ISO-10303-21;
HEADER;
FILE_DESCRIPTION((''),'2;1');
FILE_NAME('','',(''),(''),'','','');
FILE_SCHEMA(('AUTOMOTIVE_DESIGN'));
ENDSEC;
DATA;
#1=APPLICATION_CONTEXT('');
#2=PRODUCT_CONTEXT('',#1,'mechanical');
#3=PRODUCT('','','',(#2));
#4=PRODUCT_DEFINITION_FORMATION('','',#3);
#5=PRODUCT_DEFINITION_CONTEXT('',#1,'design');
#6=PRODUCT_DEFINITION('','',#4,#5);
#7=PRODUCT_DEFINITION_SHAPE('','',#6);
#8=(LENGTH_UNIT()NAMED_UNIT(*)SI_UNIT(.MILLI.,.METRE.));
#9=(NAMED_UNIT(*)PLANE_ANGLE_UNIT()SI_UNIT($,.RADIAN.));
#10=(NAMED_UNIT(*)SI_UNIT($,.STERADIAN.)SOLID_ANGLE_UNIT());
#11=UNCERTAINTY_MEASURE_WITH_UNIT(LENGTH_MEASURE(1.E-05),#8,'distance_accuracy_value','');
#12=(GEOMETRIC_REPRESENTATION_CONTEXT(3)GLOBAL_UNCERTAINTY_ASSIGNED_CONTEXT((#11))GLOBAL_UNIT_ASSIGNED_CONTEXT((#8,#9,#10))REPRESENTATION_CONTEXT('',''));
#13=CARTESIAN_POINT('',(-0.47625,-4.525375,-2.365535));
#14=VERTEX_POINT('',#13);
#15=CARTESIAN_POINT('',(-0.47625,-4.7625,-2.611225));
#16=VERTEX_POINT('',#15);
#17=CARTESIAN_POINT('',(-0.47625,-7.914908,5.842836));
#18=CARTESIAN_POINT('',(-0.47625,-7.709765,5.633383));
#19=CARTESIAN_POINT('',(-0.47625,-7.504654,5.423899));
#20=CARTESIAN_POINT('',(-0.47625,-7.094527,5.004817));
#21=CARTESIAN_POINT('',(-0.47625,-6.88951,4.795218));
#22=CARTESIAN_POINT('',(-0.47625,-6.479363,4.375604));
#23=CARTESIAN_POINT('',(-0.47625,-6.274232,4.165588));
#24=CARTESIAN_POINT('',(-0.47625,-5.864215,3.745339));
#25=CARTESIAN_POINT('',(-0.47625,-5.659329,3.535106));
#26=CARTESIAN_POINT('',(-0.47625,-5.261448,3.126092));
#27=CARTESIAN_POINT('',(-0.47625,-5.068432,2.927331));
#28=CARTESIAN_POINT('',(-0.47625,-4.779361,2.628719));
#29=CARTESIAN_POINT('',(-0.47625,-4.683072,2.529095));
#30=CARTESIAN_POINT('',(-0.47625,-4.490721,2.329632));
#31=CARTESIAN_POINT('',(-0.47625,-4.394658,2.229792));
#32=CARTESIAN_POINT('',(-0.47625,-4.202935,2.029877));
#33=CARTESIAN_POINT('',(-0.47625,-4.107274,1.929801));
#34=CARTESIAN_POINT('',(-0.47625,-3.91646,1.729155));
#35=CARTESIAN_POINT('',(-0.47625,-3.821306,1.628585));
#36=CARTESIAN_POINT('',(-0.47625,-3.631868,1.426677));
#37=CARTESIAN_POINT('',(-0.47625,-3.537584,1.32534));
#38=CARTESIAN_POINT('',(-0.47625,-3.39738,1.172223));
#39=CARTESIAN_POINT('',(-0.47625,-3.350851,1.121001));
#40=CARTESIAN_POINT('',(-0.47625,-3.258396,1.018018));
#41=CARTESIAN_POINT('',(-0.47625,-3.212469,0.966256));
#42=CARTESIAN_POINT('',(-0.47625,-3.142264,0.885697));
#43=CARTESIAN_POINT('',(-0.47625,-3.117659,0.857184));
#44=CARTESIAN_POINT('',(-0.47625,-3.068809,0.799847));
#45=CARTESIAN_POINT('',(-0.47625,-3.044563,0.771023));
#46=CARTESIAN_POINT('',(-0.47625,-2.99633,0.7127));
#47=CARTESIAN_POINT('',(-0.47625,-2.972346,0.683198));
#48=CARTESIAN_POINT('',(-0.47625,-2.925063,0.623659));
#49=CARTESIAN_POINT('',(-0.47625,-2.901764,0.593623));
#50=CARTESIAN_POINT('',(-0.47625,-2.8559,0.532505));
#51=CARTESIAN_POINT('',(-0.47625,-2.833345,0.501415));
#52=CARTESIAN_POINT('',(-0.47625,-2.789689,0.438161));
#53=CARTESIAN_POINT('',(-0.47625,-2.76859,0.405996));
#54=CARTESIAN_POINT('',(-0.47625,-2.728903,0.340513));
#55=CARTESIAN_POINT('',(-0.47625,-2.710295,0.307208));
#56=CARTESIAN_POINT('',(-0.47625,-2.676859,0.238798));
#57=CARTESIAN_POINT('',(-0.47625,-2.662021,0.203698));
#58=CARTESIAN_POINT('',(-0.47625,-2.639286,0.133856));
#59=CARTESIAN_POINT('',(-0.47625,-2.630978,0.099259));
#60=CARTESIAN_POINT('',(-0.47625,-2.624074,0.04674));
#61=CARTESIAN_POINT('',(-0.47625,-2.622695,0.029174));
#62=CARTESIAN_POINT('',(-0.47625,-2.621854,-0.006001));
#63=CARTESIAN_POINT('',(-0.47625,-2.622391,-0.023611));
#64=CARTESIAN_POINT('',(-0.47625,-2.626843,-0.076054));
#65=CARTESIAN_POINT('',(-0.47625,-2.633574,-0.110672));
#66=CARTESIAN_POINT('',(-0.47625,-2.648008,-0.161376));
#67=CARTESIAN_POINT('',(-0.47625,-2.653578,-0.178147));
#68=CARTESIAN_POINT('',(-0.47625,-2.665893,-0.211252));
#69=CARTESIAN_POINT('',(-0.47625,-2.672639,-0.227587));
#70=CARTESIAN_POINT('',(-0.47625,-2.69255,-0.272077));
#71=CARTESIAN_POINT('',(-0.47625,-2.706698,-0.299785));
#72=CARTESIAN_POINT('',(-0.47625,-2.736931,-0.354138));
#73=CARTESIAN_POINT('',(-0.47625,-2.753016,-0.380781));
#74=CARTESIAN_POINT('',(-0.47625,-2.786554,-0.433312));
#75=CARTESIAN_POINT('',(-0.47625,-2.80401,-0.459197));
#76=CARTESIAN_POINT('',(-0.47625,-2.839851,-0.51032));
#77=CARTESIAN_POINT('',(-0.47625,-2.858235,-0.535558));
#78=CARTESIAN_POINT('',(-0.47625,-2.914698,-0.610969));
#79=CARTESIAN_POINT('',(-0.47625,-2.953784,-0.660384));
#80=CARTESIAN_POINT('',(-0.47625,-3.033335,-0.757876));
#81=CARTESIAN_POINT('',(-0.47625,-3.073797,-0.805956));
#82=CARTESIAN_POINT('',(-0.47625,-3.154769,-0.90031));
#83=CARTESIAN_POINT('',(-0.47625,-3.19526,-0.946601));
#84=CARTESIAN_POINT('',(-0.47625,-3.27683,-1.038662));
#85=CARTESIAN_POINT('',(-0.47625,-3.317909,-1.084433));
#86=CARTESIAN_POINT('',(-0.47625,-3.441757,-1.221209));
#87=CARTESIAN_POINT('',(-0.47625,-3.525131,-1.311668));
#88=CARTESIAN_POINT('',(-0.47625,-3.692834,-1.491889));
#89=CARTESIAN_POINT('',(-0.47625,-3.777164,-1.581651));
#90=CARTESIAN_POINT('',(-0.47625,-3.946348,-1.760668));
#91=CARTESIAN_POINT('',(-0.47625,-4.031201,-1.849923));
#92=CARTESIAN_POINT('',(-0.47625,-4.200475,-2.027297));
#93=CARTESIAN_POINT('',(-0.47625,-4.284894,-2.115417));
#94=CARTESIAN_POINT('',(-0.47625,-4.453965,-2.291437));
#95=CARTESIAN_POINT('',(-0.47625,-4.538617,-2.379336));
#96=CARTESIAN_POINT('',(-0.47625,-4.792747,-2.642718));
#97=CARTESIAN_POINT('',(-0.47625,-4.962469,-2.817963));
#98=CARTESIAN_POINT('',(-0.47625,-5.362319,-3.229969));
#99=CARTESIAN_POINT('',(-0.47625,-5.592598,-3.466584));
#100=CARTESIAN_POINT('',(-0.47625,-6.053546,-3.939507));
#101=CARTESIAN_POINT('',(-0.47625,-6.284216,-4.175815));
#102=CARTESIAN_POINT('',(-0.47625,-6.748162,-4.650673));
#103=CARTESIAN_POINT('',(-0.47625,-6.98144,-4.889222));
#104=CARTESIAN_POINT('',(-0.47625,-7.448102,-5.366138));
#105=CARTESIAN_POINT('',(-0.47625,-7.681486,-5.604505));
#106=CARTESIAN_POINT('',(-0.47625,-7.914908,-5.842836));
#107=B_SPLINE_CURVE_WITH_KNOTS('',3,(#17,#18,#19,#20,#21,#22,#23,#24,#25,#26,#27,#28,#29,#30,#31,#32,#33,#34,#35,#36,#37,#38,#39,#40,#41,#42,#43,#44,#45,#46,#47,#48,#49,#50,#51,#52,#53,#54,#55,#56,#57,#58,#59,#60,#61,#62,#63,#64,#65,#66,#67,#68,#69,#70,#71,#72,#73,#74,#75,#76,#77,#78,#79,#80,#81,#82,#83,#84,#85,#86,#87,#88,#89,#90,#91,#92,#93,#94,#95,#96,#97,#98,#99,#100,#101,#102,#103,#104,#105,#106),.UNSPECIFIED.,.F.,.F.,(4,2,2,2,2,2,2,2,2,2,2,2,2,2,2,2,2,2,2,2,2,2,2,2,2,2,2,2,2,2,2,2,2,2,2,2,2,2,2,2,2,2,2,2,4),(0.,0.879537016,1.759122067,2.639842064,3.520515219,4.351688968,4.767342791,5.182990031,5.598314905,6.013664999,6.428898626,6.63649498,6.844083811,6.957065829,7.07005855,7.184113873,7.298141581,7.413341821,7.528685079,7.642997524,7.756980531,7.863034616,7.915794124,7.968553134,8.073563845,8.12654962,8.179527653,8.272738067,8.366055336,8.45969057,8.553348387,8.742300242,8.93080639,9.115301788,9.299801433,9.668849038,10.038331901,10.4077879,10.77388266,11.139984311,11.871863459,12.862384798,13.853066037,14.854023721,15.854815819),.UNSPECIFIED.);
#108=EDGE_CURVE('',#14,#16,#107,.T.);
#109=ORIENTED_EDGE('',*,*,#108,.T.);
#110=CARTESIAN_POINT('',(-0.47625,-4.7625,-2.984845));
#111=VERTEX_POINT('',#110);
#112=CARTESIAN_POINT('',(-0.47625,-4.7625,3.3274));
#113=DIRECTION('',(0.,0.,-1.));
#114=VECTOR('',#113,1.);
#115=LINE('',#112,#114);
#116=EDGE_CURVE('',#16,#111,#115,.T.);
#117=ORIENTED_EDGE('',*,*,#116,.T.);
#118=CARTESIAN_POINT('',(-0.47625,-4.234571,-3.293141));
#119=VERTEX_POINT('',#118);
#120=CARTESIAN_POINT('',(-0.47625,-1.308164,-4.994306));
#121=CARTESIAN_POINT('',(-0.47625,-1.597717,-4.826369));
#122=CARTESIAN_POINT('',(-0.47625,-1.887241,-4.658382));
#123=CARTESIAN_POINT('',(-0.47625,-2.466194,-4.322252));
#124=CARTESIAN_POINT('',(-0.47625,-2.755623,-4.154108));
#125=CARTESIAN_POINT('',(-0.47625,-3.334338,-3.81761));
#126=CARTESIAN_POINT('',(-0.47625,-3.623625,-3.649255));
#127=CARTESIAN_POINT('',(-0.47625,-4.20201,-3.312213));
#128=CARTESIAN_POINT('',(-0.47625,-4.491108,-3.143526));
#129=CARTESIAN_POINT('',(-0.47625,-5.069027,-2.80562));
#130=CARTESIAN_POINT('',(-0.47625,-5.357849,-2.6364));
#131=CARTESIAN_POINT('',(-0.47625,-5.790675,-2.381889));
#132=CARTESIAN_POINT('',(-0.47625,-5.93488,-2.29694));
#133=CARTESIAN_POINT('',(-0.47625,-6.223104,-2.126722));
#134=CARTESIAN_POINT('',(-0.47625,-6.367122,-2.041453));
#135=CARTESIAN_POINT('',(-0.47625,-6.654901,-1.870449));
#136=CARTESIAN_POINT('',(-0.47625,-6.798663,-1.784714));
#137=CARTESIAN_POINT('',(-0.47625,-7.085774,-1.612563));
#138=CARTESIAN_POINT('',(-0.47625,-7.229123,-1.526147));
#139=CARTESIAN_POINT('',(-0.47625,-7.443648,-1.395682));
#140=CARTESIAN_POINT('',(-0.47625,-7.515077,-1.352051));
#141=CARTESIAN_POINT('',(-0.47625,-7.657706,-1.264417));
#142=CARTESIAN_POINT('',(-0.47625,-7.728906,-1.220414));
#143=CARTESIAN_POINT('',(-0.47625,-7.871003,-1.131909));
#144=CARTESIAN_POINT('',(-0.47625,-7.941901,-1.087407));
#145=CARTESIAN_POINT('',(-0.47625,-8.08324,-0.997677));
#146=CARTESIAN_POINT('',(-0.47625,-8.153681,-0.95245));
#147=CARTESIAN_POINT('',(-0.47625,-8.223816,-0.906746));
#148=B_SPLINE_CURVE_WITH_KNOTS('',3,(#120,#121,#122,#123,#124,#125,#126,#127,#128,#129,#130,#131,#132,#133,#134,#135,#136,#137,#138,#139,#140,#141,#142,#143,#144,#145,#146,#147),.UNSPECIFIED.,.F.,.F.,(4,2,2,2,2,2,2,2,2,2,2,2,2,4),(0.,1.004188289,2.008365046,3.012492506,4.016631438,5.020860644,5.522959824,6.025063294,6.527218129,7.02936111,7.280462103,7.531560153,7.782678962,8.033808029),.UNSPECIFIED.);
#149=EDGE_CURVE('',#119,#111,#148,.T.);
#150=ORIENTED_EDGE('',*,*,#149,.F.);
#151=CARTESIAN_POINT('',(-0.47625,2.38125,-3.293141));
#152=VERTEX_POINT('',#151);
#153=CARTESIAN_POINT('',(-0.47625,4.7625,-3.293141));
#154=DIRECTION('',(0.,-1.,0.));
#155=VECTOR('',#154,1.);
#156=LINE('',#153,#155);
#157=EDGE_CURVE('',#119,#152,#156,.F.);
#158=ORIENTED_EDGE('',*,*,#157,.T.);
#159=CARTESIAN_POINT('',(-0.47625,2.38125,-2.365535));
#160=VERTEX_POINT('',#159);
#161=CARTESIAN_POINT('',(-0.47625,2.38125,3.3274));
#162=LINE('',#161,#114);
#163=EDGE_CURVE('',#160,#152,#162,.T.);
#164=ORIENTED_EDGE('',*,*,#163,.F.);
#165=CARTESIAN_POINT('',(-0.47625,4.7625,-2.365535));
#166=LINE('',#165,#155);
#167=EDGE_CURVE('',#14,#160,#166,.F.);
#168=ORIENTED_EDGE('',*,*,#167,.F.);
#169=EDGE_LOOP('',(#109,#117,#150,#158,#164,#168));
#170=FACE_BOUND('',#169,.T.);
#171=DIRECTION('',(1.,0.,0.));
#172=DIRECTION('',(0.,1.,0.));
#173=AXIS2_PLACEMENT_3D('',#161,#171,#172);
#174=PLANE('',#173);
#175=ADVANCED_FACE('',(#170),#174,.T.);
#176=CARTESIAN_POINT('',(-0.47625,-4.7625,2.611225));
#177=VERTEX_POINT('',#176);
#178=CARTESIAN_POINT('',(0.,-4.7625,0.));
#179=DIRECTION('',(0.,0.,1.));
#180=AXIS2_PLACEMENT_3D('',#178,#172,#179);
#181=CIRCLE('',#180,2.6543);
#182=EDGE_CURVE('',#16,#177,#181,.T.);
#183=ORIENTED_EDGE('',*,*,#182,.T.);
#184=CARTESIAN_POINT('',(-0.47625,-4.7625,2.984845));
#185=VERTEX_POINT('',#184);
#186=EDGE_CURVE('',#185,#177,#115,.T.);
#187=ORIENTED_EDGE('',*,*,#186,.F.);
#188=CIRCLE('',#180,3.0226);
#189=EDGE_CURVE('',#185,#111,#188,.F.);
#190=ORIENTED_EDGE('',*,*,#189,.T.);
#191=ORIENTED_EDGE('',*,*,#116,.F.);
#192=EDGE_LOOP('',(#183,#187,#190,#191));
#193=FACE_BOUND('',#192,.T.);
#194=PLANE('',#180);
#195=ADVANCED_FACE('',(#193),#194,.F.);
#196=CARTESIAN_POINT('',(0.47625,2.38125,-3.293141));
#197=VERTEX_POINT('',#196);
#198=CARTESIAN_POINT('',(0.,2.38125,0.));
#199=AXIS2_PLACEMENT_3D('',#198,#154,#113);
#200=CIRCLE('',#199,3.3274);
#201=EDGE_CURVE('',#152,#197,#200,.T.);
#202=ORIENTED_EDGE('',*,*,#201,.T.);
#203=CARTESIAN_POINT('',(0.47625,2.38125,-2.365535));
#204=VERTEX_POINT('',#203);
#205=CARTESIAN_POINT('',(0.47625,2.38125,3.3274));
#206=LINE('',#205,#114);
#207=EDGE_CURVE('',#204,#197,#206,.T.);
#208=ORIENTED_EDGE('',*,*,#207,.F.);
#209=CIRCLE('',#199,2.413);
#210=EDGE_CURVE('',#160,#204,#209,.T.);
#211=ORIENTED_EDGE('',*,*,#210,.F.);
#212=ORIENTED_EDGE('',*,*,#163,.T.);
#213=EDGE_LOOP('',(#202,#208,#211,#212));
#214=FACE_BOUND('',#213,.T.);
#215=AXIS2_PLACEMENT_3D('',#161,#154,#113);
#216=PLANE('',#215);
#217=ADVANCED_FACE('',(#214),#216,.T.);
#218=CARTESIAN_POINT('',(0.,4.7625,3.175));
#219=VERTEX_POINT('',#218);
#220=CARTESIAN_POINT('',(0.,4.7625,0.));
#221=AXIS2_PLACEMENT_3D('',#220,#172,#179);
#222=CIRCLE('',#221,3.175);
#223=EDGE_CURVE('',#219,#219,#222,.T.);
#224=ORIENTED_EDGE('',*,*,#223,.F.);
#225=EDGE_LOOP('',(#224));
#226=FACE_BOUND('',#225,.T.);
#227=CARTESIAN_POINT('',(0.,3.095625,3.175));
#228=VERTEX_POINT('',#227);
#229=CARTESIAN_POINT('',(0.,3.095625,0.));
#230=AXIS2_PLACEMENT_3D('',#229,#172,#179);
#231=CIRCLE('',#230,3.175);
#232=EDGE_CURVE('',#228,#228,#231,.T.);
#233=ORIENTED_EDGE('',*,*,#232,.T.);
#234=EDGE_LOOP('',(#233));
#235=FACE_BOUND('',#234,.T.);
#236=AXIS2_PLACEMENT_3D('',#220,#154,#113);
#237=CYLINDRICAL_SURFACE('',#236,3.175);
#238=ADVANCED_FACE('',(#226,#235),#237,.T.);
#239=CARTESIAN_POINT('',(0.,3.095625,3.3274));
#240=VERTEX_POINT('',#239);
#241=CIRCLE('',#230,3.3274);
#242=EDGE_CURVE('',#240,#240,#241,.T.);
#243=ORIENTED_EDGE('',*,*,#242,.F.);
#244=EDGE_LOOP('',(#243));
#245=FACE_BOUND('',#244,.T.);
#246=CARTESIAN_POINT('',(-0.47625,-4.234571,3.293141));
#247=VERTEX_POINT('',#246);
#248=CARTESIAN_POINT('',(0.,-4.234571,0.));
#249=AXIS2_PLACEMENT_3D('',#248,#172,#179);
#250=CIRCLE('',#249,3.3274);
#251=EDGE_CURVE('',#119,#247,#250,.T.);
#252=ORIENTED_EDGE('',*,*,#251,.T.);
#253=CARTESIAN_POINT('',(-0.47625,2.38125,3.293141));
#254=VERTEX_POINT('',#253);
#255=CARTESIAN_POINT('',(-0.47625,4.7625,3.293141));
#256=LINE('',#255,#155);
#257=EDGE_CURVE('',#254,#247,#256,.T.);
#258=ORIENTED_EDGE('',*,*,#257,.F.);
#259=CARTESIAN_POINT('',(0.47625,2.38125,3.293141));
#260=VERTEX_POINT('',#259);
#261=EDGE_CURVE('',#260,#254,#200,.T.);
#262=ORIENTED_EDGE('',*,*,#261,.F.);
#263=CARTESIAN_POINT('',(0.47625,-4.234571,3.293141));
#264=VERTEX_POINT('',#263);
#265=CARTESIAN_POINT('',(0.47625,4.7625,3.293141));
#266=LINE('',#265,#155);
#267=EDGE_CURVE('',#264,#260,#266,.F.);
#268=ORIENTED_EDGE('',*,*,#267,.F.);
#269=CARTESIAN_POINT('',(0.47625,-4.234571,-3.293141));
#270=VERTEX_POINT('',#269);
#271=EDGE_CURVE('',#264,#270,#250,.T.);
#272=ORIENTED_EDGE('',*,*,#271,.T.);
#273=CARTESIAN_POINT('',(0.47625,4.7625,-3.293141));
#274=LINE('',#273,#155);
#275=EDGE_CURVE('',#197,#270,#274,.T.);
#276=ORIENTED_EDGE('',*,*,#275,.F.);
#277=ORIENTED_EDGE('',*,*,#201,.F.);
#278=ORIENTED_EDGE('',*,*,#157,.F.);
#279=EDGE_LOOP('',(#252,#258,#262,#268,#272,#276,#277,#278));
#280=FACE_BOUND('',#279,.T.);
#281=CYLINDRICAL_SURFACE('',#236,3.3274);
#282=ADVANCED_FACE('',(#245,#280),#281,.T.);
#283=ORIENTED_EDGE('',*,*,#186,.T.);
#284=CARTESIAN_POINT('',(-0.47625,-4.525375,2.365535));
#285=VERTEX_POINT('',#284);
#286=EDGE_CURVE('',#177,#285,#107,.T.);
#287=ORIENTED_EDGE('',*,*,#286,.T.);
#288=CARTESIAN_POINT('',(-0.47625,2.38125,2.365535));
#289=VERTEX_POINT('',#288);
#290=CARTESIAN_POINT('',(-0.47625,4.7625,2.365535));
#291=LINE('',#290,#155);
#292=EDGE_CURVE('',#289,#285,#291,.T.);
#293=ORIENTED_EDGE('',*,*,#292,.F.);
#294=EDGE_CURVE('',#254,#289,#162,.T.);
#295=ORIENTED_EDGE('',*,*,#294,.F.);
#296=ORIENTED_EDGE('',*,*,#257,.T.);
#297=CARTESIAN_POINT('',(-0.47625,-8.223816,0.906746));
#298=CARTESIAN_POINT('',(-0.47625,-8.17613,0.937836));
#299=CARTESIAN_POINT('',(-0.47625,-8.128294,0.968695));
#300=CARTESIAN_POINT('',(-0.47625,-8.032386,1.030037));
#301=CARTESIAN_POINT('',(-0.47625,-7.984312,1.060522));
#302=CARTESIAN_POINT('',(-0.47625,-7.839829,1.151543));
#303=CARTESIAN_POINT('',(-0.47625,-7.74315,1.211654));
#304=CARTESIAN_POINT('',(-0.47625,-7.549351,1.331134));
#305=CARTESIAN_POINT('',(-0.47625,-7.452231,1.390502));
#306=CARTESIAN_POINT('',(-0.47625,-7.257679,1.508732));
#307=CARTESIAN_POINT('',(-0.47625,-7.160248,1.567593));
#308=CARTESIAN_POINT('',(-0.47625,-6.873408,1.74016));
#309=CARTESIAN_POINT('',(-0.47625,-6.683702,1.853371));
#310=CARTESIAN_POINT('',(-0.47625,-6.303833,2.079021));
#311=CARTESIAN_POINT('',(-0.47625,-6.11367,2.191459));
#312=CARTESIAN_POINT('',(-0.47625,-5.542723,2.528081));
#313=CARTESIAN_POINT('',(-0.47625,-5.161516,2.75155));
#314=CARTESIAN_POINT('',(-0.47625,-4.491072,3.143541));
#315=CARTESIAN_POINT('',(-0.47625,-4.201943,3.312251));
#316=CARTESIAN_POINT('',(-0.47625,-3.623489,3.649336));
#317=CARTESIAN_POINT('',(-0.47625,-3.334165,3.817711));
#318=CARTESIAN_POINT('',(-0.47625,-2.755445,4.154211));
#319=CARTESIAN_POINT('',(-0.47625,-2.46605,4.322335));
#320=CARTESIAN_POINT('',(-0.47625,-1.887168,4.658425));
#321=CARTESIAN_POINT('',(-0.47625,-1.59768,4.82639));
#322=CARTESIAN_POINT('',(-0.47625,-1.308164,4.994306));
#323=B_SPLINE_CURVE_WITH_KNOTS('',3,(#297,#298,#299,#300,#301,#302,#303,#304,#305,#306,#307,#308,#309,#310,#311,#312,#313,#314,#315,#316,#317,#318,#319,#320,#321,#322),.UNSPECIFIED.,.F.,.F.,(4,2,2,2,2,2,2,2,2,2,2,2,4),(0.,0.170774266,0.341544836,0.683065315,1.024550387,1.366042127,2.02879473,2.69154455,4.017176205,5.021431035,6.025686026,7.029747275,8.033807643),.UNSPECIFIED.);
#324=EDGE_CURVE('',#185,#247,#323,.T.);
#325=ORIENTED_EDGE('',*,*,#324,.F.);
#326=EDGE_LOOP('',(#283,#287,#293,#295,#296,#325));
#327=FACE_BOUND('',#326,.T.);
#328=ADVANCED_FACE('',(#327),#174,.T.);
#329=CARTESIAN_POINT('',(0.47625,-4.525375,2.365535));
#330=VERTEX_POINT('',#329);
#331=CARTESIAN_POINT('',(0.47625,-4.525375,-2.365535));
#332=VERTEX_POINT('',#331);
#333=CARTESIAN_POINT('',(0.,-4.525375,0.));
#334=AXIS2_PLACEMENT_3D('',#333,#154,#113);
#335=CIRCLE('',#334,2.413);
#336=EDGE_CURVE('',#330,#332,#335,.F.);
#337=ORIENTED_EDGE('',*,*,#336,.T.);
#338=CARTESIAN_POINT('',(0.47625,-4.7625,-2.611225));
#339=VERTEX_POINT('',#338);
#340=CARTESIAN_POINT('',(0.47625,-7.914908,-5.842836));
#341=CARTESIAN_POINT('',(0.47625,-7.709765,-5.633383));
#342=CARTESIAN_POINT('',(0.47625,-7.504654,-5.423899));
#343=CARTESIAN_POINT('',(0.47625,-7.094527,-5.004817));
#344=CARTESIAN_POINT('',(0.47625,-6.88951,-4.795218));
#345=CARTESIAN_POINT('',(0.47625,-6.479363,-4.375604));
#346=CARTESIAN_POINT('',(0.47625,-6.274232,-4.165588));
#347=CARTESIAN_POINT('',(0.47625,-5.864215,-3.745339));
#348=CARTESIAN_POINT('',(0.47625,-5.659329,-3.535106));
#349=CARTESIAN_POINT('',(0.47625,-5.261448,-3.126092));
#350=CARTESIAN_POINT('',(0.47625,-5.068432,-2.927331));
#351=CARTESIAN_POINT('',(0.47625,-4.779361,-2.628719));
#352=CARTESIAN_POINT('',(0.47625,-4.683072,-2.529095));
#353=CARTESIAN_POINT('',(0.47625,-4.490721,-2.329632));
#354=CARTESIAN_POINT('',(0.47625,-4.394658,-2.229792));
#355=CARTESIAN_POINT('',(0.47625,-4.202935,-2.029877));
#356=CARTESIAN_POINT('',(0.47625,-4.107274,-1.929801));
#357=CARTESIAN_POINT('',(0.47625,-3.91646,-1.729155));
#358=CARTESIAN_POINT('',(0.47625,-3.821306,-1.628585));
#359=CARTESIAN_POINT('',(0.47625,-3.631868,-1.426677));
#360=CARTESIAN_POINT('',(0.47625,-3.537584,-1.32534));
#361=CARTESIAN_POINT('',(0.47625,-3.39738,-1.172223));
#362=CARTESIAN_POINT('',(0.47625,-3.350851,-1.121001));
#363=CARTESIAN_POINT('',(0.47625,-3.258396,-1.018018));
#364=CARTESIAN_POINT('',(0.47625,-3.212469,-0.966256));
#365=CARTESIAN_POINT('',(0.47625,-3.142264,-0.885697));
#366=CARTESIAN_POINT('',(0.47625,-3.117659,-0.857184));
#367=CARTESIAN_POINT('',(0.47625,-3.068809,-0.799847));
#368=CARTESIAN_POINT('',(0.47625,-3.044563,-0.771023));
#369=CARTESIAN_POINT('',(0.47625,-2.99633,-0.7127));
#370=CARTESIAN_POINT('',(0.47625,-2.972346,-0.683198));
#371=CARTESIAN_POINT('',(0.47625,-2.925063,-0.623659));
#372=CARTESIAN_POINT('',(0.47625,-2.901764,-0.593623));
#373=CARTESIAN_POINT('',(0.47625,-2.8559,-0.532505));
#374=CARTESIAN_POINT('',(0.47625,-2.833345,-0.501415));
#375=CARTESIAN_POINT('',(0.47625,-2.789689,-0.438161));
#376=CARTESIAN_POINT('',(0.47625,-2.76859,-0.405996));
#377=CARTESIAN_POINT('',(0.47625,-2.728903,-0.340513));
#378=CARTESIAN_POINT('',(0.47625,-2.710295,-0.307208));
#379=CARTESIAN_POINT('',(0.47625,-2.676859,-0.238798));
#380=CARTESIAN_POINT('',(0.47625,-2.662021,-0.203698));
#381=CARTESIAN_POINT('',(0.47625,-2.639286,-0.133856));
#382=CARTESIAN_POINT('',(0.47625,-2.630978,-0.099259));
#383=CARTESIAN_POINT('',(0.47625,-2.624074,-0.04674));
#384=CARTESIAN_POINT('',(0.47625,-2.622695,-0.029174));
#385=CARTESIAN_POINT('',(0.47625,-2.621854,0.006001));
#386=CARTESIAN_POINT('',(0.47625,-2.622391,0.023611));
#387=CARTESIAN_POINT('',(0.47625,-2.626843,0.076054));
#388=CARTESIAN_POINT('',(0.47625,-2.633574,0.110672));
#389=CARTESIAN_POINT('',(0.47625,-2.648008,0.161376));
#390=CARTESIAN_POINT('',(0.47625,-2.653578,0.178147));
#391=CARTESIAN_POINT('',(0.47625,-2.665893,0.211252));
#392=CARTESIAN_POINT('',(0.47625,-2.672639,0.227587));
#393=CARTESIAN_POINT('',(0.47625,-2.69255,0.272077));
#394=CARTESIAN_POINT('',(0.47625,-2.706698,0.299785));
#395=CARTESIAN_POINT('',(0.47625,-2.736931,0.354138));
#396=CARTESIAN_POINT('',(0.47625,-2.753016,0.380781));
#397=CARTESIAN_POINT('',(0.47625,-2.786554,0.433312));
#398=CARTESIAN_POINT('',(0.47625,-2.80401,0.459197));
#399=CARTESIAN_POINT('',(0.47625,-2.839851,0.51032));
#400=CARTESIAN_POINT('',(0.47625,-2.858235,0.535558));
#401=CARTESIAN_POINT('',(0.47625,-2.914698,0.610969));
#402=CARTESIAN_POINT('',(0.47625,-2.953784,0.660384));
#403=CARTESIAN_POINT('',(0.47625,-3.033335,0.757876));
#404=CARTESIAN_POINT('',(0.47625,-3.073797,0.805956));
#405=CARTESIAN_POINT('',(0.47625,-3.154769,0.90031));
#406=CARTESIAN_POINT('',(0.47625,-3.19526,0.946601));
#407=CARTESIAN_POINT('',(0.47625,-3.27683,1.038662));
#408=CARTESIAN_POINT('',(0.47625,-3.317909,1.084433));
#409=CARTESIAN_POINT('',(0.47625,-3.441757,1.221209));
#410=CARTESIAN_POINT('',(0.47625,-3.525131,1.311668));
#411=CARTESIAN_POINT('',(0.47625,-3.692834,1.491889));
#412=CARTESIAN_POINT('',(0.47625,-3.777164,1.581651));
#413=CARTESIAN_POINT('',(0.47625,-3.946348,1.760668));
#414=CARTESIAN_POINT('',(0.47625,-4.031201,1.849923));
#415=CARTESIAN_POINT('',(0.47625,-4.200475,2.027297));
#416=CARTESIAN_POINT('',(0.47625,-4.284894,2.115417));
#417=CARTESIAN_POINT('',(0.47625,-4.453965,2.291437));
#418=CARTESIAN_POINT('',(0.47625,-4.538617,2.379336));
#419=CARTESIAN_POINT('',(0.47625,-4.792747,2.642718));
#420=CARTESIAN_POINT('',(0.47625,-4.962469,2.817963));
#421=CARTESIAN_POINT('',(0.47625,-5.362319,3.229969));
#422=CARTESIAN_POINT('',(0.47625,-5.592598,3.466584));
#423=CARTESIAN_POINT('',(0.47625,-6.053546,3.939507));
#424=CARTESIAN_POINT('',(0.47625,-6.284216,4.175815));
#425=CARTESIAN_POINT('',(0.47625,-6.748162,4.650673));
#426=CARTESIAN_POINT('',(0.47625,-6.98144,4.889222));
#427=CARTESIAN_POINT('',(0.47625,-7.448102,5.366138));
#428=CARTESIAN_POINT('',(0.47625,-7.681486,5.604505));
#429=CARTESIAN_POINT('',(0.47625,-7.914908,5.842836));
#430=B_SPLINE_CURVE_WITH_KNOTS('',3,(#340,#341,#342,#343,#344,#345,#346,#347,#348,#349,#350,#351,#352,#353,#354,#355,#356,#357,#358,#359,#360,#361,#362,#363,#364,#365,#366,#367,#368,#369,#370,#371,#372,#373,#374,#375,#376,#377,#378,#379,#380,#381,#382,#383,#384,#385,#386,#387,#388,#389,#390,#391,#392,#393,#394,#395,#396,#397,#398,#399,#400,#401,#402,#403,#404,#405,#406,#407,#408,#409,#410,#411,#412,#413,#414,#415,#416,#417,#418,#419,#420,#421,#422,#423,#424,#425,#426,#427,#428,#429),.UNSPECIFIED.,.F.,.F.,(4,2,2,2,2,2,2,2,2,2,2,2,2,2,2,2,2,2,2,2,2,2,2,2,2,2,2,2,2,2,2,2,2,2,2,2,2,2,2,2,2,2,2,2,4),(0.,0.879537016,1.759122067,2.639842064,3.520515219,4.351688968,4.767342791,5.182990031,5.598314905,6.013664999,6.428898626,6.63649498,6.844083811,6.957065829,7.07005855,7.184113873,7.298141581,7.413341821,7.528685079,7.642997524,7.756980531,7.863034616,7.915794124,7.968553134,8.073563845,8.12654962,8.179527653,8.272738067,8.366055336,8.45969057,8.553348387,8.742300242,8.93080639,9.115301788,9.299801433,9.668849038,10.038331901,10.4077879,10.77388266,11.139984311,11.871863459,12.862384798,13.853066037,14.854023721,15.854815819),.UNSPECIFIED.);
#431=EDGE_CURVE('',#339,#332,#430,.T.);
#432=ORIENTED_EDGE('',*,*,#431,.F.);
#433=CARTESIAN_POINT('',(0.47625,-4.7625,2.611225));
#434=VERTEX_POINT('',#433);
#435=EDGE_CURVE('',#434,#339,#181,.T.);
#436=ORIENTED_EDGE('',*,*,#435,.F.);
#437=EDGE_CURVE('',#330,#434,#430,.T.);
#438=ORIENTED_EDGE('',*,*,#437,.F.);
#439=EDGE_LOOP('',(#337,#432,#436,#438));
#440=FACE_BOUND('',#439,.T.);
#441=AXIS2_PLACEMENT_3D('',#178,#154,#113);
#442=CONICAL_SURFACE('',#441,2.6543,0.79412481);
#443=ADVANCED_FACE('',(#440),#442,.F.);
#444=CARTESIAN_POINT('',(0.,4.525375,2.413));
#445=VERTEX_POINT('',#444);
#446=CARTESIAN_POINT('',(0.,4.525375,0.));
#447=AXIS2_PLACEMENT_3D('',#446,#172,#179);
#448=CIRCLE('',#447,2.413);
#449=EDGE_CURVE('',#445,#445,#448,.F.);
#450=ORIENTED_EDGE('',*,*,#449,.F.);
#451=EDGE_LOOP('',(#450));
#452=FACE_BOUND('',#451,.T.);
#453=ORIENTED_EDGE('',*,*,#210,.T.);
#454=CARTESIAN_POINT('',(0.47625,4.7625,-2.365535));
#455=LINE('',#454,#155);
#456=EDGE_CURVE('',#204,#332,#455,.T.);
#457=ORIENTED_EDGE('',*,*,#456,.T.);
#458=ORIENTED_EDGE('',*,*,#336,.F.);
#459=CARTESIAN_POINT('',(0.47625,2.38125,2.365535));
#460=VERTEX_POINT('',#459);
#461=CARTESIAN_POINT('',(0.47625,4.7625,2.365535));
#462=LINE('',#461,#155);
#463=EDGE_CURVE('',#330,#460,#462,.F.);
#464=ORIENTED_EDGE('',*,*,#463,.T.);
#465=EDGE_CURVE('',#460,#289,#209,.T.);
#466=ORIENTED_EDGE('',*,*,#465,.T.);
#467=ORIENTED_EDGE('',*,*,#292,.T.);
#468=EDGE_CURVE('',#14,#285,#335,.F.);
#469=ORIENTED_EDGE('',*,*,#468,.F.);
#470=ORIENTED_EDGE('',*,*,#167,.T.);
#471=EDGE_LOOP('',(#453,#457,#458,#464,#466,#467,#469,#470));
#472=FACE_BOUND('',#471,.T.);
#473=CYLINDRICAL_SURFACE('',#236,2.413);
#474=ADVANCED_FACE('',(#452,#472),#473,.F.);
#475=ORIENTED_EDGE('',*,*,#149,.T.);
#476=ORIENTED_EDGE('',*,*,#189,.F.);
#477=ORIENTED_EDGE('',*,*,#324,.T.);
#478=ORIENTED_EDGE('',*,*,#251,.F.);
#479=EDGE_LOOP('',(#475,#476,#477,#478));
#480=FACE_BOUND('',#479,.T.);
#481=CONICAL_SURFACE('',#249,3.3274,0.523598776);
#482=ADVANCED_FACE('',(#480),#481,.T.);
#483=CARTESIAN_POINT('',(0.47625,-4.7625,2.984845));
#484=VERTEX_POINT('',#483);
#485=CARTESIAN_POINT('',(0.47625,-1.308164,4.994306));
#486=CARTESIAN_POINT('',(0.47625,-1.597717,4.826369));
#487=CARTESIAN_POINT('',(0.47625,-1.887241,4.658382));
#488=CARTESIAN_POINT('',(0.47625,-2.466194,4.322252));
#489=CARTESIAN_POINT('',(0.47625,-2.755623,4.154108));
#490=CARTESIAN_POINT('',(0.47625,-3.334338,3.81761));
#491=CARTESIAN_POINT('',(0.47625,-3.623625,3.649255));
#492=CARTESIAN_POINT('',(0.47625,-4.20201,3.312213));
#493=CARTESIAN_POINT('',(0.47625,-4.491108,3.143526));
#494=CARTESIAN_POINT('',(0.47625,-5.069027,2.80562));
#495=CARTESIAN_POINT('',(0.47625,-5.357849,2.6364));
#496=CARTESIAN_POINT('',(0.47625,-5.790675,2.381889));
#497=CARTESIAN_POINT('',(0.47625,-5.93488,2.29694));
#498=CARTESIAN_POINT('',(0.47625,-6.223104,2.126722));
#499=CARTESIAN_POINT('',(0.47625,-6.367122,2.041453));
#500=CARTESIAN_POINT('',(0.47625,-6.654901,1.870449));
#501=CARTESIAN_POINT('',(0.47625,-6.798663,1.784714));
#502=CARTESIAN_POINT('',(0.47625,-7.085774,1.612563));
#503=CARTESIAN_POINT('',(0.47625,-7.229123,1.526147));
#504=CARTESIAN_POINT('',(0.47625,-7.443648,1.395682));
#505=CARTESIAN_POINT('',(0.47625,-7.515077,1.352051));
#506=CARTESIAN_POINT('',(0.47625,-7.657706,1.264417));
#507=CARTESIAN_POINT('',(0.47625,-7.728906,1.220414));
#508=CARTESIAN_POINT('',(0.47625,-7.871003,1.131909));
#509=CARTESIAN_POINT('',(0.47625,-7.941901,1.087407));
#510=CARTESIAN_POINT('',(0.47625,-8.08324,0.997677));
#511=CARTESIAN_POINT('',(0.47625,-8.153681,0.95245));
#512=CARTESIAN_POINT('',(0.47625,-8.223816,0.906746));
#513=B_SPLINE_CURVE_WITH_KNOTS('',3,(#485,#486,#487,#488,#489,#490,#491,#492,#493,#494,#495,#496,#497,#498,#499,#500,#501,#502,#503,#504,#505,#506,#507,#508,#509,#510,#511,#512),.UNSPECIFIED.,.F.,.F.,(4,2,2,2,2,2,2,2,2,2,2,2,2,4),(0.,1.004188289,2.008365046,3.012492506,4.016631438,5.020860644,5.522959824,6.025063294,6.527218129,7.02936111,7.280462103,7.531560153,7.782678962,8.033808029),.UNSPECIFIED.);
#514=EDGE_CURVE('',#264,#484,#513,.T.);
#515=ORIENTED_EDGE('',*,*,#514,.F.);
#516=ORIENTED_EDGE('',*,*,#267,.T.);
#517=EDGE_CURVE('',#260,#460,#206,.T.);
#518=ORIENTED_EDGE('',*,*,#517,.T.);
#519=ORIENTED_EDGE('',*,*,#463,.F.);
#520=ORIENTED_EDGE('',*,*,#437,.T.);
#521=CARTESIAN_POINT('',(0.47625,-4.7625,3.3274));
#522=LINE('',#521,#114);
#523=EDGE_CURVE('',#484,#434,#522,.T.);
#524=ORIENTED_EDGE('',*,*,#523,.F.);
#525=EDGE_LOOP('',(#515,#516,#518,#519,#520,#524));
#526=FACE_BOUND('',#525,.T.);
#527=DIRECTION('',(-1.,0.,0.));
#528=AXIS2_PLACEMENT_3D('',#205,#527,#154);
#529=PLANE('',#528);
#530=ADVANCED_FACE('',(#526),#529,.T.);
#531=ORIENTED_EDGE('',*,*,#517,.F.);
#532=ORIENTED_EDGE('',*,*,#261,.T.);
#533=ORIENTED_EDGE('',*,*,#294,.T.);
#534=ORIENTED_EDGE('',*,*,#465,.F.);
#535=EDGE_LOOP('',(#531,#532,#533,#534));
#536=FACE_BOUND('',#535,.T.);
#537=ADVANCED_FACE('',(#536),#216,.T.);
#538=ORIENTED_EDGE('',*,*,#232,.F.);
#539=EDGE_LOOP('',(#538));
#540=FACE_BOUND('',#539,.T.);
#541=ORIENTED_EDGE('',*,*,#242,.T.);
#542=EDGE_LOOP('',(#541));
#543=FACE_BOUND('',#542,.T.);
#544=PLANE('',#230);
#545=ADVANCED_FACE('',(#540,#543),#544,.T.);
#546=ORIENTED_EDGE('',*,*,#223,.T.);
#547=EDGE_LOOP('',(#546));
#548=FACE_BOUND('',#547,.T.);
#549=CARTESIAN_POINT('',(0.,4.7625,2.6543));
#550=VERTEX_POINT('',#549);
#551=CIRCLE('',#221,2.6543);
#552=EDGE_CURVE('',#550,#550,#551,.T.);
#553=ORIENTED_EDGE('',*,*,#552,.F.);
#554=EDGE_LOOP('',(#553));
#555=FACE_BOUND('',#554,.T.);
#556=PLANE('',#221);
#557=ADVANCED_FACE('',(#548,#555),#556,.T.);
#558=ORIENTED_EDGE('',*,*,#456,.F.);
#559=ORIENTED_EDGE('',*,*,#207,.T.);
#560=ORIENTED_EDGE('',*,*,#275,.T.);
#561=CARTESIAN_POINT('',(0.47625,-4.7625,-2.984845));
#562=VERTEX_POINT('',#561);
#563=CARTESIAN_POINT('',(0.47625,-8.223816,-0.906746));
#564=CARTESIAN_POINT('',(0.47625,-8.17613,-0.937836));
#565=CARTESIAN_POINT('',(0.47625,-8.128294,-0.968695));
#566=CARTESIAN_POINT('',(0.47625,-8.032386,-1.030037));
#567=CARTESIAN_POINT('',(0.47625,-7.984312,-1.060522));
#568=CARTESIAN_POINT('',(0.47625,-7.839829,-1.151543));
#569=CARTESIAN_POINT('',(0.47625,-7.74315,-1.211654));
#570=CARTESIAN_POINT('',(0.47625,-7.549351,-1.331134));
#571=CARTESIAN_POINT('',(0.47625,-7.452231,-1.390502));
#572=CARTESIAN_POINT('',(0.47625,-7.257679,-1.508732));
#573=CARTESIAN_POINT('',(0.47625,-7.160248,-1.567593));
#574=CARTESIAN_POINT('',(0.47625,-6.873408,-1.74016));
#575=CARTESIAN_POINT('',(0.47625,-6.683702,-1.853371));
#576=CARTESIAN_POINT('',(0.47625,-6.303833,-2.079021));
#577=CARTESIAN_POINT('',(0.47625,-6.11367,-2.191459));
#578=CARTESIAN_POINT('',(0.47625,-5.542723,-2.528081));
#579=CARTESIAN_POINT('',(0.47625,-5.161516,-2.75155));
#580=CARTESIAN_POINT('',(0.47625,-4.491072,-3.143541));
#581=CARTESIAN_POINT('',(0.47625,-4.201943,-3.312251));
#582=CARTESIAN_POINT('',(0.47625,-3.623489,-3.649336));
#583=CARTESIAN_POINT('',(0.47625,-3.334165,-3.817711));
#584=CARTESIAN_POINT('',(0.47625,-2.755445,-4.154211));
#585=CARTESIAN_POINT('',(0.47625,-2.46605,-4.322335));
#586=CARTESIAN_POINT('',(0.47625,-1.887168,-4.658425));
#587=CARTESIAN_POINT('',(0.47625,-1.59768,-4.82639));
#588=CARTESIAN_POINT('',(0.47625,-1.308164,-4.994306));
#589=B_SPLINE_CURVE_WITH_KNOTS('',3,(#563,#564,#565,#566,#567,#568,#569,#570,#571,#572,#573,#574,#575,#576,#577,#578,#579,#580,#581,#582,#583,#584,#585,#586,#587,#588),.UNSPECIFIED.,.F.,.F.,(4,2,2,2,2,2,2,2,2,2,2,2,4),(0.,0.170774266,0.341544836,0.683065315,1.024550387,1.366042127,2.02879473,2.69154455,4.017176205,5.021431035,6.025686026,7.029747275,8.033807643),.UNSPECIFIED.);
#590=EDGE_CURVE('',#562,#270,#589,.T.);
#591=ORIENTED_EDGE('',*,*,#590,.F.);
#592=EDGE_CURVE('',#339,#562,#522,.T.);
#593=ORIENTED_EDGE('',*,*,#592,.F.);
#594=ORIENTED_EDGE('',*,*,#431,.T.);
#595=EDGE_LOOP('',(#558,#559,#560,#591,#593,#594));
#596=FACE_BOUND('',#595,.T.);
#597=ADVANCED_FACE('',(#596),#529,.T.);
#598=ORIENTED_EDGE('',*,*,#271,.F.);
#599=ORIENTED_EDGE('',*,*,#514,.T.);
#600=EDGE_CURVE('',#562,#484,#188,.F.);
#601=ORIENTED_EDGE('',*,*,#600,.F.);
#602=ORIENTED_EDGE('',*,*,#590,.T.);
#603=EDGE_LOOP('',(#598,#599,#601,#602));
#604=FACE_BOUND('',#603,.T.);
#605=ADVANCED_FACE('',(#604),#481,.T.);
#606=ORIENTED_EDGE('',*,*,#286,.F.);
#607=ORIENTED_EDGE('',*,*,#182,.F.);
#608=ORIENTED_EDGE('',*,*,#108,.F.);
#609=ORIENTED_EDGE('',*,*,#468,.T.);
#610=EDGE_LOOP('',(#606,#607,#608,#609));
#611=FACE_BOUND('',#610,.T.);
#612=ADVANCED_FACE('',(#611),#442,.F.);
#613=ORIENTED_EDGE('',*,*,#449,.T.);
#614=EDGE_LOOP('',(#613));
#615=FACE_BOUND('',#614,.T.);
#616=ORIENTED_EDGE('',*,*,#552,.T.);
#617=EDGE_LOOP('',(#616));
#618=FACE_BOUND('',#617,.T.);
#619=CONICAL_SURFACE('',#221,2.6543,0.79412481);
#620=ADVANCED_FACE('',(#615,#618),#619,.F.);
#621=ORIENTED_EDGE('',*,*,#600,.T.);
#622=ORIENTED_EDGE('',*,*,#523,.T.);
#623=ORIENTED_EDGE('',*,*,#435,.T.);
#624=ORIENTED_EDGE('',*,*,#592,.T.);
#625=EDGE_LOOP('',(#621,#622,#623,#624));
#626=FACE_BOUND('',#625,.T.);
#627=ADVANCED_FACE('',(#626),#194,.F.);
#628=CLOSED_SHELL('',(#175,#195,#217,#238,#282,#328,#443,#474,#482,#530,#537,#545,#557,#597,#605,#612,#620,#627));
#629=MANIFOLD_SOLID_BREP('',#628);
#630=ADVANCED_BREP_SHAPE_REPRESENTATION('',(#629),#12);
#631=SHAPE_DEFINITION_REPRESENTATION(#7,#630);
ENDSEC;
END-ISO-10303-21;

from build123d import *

# Parameters (mm, degrees)
BOSS_EXTRUDE1_DEPTH      = 4.7625
BOSS_EXTRUDE1_DEPTH_BACK = 4.7625
SKETCH11_R               = 3.3274
SKETCH11_R_2             = 2.413
CUT_EXTRUDE1_START       = 3.095625
SKETCH12_R               = 3.3274
SKETCH12_R_2             = 3.175
CUT_EXTRUDE1_DEPTH       = 1.666875
CHAMFER2_SIZE            = 0.3048
CHAMFER2_SIZE2           = 0.527929086
EXTRUDE4_DEPTH           = 7.695116711
EXTRUDE4_DEPTH_BACK      = 7.695116711
SKETCH8_W                = 0.9525
SKETCH8_H                = 7.14375


# Read off the part's stored shape, not the designer's step: Cut-Extrude3, Cut-Extrude10
with BuildPart() as part:
    # Sketch11 → Boss-Extrude1 (new, two sides: drawn at the far end of the back side and taken through both)
    with BuildSketch(Plane(origin=(0, 0, 0), x_dir=(1, 0, 0), z_dir=(0, 1, 0)).offset(-BOSS_EXTRUDE1_DEPTH_BACK)):
        with Locations(Location((0, 0, 0), (0, 0, 90))):
            Circle(SKETCH11_R)
        with Locations(Location((0, 0, 0), (0, 0, 90))):
            Circle(SKETCH11_R_2, mode=Mode.SUBTRACT)
    extrude(amount=BOSS_EXTRUDE1_DEPTH + BOSS_EXTRUDE1_DEPTH_BACK)

    # Sketch12 → Cut-Extrude1 (cut)
    with BuildSketch(Plane(origin=(0, 0, 0), x_dir=(1, 0, 0), z_dir=(0, 1, 0)).offset(CUT_EXTRUDE1_START)):
        with Locations(Location((0, 0, 0), (0, 0, 90))):
            Circle(SKETCH12_R)
        with Locations(Location((0, 0, 0), (0, 0, 270))):
            Circle(SKETCH12_R_2, mode=Mode.SUBTRACT)
    extrude(amount=CUT_EXTRUDE1_DEPTH, mode=Mode.SUBTRACT)

    # Cut-Extrude3 outline → Cut-Extrude3 (revolve, cut)
    with BuildSketch(Plane.XY):
        Polygon((2.413, 4.7625), (2.413, 4.52537515), (2.6543, 4.7625), align=None)
    revolve(axis=Axis((0, 0, 0), (0, 1, 0)), mode=Mode.SUBTRACT)

    # Cut-Extrude10 outline → Cut-Extrude10 (revolve, cut)
    with BuildSketch(Plane.XY):
        Polygon((2.6543, -4.7625), (2.413, -4.52537515), (2.413, -4.7625), align=None)
    revolve(axis=Axis((0, 0, 0), (0, 1, 0)), mode=Mode.SUBTRACT)

    # Chamfer2
    chamfer2_edges = [part.edges().sort_by_distance(p)[0] for p in [
        (0, -4.7625, 3.3274),
    ]]
    chamfer2_side = [part.faces().sort_by_distance(p)[0] for p in [
        (0, -4.7625, 3.233286916),
    ]]
    chamfer(chamfer2_edges, length=CHAMFER2_SIZE, length2=CHAMFER2_SIZE2, reference=chamfer2_side[0])

    # Sketch8 → Extrude4 (cut, two sides: drawn at the far end of the back side and taken through both)
    with BuildSketch(Plane.XY.offset(-EXTRUDE4_DEPTH_BACK)):
        with Locations((0, -1.190625)):
            Rectangle(SKETCH8_W, SKETCH8_H)
    extrude(amount=EXTRUDE4_DEPTH + EXTRUDE4_DEPTH_BACK, mode=Mode.SUBTRACT)


solid = part.part
